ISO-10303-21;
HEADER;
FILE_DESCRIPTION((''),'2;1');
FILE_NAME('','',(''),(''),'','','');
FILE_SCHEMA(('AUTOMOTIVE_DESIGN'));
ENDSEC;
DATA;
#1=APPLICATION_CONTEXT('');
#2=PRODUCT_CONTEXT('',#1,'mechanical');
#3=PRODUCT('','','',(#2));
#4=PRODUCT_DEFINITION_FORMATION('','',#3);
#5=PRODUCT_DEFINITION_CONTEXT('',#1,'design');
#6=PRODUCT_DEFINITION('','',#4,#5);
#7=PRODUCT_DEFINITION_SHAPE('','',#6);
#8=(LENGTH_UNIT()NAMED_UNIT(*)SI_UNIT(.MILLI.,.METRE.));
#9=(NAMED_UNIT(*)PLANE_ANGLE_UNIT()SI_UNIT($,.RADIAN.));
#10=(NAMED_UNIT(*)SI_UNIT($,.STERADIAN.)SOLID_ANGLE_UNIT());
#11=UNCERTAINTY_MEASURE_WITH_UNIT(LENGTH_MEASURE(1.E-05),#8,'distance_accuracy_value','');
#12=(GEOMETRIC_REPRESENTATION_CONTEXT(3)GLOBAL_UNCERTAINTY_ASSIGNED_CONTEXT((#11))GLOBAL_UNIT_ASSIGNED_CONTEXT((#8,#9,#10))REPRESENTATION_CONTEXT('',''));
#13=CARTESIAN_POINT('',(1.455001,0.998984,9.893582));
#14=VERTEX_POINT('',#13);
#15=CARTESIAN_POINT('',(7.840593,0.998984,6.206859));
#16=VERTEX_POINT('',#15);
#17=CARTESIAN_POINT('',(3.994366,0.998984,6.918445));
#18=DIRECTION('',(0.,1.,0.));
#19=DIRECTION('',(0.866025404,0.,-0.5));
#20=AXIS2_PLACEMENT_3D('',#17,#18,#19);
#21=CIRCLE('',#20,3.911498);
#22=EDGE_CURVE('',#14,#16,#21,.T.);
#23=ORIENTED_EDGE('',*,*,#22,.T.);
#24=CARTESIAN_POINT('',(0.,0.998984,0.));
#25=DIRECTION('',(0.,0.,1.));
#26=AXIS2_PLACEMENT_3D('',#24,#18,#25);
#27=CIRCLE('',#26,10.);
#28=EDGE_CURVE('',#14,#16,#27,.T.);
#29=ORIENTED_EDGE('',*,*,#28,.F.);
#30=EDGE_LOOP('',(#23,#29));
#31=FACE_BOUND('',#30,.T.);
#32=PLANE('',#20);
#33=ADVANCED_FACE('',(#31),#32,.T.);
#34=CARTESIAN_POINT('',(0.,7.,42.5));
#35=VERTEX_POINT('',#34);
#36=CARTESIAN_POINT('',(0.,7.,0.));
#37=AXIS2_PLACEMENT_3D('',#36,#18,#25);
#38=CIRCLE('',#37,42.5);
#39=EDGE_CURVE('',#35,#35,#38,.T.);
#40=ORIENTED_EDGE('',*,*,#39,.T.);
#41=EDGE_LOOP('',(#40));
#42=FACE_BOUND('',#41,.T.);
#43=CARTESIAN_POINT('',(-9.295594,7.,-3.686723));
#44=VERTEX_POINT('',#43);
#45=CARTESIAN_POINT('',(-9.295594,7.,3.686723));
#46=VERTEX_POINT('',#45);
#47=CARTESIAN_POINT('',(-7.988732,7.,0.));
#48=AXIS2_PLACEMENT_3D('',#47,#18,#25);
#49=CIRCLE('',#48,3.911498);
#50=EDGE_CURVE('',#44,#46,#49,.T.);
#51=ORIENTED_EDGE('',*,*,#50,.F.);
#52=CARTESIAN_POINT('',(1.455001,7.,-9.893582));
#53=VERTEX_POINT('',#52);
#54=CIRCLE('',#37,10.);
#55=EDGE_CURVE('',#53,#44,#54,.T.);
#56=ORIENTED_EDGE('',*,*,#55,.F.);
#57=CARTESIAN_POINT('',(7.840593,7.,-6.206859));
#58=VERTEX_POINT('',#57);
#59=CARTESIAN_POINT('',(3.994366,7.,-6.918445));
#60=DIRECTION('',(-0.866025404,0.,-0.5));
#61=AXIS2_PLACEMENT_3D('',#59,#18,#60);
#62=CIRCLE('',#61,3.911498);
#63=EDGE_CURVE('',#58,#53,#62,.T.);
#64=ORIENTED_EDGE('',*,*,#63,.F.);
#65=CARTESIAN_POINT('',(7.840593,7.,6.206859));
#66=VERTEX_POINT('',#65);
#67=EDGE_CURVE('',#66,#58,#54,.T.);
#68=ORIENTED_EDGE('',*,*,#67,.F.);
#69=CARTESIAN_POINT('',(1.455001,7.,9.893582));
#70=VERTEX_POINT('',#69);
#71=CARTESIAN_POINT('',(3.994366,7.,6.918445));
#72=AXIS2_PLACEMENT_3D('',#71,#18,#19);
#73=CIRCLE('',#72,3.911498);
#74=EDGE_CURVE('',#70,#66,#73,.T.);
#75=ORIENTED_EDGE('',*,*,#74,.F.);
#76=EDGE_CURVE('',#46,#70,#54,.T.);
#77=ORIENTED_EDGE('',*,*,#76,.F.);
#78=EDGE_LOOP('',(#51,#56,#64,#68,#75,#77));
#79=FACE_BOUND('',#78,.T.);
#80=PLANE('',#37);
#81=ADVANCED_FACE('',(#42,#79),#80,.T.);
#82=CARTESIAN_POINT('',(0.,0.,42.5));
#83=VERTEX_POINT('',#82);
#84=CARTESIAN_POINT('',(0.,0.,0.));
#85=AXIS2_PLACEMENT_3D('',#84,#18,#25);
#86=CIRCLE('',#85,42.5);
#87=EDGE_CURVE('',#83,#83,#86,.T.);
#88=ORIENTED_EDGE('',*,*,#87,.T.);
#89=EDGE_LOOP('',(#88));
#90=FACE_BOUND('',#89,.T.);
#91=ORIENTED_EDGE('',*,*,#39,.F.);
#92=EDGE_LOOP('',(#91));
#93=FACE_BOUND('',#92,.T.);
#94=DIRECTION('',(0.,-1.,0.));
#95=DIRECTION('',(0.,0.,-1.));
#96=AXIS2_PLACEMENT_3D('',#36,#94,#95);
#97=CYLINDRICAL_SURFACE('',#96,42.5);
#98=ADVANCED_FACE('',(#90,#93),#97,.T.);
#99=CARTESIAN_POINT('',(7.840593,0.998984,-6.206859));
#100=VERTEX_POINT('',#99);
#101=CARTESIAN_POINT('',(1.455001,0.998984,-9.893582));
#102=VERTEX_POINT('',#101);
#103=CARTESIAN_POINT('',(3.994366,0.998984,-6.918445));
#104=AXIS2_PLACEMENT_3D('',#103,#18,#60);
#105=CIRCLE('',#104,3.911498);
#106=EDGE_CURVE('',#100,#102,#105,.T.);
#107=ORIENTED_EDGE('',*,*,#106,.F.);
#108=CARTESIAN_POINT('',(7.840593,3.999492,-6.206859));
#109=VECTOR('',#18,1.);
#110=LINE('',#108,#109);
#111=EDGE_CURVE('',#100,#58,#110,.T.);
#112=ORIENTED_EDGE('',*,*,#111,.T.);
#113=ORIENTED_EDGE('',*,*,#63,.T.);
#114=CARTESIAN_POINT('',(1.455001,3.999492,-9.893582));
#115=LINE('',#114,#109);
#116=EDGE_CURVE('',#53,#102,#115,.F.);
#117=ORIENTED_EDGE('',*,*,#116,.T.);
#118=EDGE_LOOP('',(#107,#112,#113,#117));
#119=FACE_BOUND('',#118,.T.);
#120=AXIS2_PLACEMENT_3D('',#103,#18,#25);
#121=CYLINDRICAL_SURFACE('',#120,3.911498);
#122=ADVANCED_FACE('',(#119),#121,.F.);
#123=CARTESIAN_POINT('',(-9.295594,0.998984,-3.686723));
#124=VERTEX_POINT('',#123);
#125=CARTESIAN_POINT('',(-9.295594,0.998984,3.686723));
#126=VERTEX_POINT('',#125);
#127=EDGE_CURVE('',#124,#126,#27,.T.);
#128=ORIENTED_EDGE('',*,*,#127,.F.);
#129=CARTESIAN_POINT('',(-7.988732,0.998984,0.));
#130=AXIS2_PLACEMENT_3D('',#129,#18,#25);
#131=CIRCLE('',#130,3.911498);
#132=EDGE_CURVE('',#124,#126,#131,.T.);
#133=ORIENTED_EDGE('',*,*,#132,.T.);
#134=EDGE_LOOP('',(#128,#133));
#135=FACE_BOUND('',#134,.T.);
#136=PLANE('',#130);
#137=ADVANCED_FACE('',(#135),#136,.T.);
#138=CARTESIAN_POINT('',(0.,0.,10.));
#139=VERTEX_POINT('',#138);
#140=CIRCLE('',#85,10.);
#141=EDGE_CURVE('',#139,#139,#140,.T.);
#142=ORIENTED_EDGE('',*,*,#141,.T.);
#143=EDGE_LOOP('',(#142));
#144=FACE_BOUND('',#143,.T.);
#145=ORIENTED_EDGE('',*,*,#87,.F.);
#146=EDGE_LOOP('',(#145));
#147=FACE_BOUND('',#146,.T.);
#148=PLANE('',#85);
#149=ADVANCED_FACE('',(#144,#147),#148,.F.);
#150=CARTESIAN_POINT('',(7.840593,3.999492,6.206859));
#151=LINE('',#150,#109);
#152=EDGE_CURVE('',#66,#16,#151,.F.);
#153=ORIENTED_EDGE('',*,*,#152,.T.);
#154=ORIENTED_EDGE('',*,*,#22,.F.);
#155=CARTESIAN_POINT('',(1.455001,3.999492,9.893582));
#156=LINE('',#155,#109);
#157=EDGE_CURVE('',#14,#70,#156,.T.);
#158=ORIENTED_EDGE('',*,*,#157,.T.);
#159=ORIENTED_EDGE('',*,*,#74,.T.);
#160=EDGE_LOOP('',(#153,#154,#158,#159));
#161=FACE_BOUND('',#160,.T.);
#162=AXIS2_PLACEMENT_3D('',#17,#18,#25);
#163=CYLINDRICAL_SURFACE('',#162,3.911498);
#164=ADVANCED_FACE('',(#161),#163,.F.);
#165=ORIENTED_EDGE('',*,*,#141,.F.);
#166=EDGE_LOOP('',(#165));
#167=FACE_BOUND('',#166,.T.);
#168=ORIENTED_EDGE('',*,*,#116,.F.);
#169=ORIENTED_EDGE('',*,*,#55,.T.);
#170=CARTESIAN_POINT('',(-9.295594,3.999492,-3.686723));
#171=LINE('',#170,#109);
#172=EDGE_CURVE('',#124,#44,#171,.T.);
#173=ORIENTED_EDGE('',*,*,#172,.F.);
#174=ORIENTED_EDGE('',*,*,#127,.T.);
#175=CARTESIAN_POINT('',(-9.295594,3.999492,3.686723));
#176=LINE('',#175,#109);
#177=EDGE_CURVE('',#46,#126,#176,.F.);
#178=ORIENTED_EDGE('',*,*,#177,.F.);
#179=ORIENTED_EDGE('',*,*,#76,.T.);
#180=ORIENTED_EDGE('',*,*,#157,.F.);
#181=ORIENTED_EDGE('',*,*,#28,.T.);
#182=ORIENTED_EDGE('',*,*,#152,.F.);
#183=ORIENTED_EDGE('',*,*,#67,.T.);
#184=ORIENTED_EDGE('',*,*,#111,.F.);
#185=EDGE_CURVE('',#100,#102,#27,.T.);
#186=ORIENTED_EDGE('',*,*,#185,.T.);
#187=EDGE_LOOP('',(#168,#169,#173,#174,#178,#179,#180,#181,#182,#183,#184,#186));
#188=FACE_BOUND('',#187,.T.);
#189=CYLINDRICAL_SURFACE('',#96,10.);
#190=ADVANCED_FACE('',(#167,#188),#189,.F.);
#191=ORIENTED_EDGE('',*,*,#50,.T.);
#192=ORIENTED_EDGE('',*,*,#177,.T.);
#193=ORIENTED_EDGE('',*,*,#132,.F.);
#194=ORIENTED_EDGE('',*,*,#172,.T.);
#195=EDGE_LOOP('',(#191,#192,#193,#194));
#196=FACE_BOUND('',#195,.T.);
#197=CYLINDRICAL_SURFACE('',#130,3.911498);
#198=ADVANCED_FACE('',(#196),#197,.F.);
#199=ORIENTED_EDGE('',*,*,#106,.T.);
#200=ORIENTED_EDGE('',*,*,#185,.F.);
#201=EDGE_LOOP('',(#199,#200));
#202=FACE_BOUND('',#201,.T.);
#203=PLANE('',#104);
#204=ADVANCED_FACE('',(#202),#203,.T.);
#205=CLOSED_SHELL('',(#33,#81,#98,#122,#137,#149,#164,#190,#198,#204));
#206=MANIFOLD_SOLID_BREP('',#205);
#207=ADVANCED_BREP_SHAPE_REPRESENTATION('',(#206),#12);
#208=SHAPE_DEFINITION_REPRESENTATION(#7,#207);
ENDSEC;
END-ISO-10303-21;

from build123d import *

# Parameters (mm, degrees)
SKETCH1_R           = 42.5
BOSS_EXTRUDE1_DEPTH = 7
SKETCH2_R           = 10
CUT_EXTRUDE1_DEPTH  = 61.510329697
SKETCH3_R           = 3.911497786
CUT_EXTRUDE2_DEPTH  = 6.001016356
CIRPATTERN1_COUNT   = 3


with BuildPart() as part:
    # Sketch1 → Boss-Extrude1 (new body)
    with BuildSketch(Plane(origin=(0, 0, 0), x_dir=(1, 0, 0), z_dir=(0, 1, 0))):
        Circle(SKETCH1_R)
    extrude(amount=BOSS_EXTRUDE1_DEPTH)

    # Sketch2 → Cut-Extrude1 (cut, through all)
    with BuildSketch(Plane(origin=(0, 0, 0), x_dir=(1, 0, 0), z_dir=(0, 1, 0))):
        Circle(SKETCH2_R)
    extrude(amount=CUT_EXTRUDE1_DEPTH, mode=Mode.SUBTRACT)

    # Sketch3 → Cut-Extrude2 (cut)
    with BuildSketch(Plane(origin=(0, 7, 0), x_dir=(1, 0, 0), z_dir=(0, 1, 0))):
        with Locations((-7.988732022, 0)):
            Circle(SKETCH3_R)
    cut_extrude2 = extrude(amount=-CUT_EXTRUDE2_DEPTH, mode=Mode.SUBTRACT)

    # CirPattern1: Cut-Extrude2 ×3 about axis
    cirpattern1_axis = Axis((0, 0, 0), (0, 1, 0))
    for i in range(1, CIRPATTERN1_COUNT):
        add(cut_extrude2.rotate(cirpattern1_axis, i * 360 / CIRPATTERN1_COUNT), mode=Mode.SUBTRACT)


solid = part.part
